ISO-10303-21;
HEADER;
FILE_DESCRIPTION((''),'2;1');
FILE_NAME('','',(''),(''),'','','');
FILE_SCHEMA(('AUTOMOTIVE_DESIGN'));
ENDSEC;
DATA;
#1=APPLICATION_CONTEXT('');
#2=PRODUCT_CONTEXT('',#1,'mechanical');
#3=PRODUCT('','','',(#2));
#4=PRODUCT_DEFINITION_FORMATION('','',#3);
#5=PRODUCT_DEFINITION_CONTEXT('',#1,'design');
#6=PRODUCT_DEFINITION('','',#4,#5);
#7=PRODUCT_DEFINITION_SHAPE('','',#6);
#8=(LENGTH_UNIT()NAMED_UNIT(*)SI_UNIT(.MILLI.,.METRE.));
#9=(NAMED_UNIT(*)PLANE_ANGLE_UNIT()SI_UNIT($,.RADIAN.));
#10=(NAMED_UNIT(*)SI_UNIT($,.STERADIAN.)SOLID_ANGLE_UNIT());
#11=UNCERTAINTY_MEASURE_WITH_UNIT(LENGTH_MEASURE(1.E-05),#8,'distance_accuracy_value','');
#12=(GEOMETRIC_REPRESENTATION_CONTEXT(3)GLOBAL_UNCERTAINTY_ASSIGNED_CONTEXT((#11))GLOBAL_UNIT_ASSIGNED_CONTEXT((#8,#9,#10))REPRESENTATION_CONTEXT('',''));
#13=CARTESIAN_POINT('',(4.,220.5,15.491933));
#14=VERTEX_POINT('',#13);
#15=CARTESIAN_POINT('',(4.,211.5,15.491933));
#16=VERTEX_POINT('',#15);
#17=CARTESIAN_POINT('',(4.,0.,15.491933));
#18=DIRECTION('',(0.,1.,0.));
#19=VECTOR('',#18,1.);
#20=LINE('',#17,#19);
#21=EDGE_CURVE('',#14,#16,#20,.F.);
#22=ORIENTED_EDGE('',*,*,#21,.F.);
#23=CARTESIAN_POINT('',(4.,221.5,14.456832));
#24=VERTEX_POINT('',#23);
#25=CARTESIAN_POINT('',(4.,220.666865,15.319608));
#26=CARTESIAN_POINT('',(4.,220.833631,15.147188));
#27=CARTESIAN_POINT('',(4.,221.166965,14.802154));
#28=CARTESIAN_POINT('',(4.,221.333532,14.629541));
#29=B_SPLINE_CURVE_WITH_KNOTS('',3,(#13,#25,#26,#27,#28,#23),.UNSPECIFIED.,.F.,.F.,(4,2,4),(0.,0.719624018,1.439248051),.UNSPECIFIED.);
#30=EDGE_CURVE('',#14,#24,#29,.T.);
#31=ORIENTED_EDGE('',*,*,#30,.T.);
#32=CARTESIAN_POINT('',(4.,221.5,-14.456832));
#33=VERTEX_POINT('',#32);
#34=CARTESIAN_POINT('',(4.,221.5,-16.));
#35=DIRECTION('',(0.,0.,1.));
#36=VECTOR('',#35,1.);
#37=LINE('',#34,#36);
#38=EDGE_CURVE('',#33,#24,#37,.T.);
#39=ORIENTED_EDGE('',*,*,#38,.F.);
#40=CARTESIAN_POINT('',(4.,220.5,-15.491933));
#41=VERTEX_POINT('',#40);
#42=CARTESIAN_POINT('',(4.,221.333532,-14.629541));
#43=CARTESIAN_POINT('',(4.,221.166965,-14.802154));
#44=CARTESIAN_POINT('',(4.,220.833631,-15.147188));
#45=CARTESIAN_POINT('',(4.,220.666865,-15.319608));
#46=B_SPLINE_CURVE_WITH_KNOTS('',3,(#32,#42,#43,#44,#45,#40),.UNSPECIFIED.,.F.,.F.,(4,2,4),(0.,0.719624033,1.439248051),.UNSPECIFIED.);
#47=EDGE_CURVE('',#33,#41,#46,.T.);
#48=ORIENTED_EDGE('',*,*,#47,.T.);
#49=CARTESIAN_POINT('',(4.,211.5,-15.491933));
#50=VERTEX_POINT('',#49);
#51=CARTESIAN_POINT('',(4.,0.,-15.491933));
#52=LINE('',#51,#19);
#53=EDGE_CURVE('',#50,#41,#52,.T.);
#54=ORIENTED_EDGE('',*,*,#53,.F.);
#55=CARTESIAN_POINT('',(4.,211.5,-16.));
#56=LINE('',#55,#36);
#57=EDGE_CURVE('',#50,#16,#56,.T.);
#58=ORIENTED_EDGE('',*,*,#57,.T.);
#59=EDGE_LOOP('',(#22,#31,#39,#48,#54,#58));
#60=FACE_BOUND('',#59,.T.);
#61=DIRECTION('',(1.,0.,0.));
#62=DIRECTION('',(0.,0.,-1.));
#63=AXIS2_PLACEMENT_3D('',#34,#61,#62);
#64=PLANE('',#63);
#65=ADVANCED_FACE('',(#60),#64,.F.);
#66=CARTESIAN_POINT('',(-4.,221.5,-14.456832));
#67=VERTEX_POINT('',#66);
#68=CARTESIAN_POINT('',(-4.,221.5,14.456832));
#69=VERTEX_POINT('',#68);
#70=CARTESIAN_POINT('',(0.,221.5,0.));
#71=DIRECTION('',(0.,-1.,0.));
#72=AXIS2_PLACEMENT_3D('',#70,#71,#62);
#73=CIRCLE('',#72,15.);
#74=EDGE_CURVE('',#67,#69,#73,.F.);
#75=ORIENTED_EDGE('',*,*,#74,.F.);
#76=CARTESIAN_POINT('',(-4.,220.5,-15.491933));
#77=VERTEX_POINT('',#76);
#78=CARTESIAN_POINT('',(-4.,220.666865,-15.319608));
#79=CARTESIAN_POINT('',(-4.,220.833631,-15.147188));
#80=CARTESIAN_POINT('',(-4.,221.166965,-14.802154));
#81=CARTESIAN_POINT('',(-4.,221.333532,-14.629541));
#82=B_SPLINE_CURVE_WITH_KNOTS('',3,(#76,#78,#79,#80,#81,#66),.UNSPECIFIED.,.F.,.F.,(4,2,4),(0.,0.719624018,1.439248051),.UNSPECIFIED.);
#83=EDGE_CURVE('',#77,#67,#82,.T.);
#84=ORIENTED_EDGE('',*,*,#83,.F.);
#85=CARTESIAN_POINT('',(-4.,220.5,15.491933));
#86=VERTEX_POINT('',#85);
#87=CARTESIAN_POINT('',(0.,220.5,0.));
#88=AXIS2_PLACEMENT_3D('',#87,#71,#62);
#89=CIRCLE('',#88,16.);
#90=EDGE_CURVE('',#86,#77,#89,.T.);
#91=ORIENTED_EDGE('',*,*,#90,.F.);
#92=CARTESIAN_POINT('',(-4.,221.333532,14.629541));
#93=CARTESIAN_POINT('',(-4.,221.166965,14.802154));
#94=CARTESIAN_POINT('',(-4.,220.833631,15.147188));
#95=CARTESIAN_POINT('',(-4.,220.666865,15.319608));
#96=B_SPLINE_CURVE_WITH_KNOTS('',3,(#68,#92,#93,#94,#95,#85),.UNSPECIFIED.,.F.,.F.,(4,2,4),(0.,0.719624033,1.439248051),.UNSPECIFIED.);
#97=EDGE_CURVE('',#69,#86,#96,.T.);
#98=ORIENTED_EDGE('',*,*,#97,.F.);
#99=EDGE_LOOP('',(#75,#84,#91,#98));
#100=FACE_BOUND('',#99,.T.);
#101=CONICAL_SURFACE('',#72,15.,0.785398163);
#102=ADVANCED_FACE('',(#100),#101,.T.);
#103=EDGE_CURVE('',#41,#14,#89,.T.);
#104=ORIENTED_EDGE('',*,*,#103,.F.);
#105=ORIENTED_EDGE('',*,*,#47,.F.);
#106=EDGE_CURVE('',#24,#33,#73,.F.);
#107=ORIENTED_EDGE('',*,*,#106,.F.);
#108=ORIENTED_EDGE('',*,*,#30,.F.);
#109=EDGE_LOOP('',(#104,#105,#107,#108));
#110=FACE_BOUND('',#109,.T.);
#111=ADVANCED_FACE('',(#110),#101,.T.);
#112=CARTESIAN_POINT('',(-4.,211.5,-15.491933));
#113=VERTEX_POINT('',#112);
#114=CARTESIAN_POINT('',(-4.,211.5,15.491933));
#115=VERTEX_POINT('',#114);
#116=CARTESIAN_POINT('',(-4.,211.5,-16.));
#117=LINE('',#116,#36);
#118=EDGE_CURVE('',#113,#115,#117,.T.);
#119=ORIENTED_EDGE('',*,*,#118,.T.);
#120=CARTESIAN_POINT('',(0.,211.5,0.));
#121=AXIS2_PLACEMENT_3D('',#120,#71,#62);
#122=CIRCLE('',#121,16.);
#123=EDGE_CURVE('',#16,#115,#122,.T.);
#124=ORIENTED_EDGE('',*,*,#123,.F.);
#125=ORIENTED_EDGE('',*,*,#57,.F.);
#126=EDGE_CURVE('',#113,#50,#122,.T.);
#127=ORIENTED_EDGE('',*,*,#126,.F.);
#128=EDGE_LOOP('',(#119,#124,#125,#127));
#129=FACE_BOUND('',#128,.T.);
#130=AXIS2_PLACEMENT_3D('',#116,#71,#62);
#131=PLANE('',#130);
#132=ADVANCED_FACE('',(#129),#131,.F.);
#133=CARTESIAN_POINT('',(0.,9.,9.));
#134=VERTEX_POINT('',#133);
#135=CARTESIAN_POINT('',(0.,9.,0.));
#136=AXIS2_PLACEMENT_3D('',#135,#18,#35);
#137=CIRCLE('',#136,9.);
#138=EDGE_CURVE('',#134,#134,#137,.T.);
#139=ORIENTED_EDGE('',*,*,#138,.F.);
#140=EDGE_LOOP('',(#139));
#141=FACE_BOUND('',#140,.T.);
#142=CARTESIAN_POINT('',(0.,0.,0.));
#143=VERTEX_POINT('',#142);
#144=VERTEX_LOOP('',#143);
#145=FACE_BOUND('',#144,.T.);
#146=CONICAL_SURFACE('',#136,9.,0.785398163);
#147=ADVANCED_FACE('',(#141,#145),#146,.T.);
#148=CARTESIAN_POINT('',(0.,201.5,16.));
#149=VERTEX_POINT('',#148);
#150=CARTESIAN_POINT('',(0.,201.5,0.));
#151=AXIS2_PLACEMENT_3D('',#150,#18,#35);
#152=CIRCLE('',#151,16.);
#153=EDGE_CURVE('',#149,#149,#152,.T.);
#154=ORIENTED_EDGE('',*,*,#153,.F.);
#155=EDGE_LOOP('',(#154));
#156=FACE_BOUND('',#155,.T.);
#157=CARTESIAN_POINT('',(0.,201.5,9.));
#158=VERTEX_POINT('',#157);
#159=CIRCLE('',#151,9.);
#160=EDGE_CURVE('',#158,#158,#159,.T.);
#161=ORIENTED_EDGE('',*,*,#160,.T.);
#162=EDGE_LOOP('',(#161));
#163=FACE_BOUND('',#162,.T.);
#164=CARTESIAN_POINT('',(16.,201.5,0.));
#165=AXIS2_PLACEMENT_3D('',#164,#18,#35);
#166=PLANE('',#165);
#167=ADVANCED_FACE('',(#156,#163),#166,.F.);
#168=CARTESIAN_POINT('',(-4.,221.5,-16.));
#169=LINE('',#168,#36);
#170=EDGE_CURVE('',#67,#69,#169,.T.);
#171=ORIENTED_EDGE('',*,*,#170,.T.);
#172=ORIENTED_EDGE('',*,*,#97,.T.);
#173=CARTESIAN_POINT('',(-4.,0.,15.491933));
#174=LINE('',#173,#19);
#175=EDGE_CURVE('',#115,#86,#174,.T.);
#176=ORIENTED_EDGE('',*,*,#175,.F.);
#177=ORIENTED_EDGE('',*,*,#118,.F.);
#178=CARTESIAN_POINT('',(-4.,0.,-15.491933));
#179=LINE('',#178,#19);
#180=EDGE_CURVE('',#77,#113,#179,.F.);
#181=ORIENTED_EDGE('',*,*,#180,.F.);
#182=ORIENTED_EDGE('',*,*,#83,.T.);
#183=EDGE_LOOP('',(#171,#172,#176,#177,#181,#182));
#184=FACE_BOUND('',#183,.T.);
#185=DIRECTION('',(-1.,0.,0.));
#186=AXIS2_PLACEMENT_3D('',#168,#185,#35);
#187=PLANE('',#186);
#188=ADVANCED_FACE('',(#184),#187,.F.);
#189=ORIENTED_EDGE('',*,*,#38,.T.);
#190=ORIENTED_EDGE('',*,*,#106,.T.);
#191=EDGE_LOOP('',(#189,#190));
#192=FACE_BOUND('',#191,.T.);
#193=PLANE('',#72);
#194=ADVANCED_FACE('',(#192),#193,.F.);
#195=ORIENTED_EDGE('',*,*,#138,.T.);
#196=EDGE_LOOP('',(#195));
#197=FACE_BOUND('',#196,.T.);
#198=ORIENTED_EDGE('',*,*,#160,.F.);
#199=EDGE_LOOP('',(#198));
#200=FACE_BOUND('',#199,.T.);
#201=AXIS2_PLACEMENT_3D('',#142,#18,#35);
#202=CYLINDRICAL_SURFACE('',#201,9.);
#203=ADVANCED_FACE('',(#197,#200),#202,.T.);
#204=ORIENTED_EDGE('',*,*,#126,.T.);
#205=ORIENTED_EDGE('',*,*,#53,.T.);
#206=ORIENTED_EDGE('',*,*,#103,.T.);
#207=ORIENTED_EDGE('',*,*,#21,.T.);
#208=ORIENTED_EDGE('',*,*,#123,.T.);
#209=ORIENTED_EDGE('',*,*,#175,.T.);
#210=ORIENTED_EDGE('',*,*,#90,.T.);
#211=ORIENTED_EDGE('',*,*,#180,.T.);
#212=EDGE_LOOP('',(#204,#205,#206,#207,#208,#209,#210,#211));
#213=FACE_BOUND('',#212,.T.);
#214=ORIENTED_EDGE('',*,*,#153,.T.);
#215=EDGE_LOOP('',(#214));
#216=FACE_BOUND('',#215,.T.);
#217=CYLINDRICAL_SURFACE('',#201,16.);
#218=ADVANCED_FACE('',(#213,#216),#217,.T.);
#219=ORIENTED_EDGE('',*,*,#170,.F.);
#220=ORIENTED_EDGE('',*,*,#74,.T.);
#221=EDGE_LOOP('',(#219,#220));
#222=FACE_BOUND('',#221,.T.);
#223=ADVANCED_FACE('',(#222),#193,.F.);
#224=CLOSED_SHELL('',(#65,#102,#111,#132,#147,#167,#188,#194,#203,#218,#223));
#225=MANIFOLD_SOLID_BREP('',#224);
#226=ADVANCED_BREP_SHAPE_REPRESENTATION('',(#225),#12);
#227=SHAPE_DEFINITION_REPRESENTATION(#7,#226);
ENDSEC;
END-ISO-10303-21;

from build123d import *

# Parameters (mm, degrees)
CHAMFER_1_SIZE           = 9
CUT_EXTRUDE_1_DEPTH      = 223.652756552
CUT_EXTRUDE_1_DEPTH_BACK = 223.652756552
SKETCH_2_W               = 8
SKETCH_2_H               = 10
CHAMFER_2_SIZE           = 1


with BuildPart() as part:
    # Эскиз1 → Повернуть1 (revolve)
    with BuildSketch(Plane.XY, mode=Mode.PRIVATE) as revolve_1_sk:
        Polygon((0, 0), (0, 221.5), (16, 221.5), (16, 201.5), (9, 201.5), (9, 0), align=None)
    revolve(revolve_1_sk.sketch.rotate(Axis((0, 0, 0), (0, -1, 0)), 90), axis=Axis((0, 0, 0), (0, -1, 0)))

    # Фаска1
    chamfer_1_edges = [part.edges().sort_by_distance(p)[0] for p in [
        (0, 0, -9),
    ]]
    chamfer(chamfer_1_edges, length=CHAMFER_1_SIZE - 0.0001)  # a hair under: the kernel refuses the full size

    # Эскиз2 → Вырез-Вытянуть1 (cut, two sides: drawn at the far end of the back side and taken through both)
    with BuildSketch(Plane.XY.offset(-CUT_EXTRUDE_1_DEPTH_BACK)):
        with Locations((0, 216.5)):
            Rectangle(SKETCH_2_W, SKETCH_2_H)
    extrude(amount=CUT_EXTRUDE_1_DEPTH + CUT_EXTRUDE_1_DEPTH_BACK, mode=Mode.SUBTRACT)

    # Фаска2
    chamfer_2_edges = [part.edges().sort_by_distance(p)[0] for p in [
        (16, 221.5, 0),
        (-16, 221.5, 0),
    ]]
    chamfer(chamfer_2_edges, length=CHAMFER_2_SIZE)


solid = part.part
